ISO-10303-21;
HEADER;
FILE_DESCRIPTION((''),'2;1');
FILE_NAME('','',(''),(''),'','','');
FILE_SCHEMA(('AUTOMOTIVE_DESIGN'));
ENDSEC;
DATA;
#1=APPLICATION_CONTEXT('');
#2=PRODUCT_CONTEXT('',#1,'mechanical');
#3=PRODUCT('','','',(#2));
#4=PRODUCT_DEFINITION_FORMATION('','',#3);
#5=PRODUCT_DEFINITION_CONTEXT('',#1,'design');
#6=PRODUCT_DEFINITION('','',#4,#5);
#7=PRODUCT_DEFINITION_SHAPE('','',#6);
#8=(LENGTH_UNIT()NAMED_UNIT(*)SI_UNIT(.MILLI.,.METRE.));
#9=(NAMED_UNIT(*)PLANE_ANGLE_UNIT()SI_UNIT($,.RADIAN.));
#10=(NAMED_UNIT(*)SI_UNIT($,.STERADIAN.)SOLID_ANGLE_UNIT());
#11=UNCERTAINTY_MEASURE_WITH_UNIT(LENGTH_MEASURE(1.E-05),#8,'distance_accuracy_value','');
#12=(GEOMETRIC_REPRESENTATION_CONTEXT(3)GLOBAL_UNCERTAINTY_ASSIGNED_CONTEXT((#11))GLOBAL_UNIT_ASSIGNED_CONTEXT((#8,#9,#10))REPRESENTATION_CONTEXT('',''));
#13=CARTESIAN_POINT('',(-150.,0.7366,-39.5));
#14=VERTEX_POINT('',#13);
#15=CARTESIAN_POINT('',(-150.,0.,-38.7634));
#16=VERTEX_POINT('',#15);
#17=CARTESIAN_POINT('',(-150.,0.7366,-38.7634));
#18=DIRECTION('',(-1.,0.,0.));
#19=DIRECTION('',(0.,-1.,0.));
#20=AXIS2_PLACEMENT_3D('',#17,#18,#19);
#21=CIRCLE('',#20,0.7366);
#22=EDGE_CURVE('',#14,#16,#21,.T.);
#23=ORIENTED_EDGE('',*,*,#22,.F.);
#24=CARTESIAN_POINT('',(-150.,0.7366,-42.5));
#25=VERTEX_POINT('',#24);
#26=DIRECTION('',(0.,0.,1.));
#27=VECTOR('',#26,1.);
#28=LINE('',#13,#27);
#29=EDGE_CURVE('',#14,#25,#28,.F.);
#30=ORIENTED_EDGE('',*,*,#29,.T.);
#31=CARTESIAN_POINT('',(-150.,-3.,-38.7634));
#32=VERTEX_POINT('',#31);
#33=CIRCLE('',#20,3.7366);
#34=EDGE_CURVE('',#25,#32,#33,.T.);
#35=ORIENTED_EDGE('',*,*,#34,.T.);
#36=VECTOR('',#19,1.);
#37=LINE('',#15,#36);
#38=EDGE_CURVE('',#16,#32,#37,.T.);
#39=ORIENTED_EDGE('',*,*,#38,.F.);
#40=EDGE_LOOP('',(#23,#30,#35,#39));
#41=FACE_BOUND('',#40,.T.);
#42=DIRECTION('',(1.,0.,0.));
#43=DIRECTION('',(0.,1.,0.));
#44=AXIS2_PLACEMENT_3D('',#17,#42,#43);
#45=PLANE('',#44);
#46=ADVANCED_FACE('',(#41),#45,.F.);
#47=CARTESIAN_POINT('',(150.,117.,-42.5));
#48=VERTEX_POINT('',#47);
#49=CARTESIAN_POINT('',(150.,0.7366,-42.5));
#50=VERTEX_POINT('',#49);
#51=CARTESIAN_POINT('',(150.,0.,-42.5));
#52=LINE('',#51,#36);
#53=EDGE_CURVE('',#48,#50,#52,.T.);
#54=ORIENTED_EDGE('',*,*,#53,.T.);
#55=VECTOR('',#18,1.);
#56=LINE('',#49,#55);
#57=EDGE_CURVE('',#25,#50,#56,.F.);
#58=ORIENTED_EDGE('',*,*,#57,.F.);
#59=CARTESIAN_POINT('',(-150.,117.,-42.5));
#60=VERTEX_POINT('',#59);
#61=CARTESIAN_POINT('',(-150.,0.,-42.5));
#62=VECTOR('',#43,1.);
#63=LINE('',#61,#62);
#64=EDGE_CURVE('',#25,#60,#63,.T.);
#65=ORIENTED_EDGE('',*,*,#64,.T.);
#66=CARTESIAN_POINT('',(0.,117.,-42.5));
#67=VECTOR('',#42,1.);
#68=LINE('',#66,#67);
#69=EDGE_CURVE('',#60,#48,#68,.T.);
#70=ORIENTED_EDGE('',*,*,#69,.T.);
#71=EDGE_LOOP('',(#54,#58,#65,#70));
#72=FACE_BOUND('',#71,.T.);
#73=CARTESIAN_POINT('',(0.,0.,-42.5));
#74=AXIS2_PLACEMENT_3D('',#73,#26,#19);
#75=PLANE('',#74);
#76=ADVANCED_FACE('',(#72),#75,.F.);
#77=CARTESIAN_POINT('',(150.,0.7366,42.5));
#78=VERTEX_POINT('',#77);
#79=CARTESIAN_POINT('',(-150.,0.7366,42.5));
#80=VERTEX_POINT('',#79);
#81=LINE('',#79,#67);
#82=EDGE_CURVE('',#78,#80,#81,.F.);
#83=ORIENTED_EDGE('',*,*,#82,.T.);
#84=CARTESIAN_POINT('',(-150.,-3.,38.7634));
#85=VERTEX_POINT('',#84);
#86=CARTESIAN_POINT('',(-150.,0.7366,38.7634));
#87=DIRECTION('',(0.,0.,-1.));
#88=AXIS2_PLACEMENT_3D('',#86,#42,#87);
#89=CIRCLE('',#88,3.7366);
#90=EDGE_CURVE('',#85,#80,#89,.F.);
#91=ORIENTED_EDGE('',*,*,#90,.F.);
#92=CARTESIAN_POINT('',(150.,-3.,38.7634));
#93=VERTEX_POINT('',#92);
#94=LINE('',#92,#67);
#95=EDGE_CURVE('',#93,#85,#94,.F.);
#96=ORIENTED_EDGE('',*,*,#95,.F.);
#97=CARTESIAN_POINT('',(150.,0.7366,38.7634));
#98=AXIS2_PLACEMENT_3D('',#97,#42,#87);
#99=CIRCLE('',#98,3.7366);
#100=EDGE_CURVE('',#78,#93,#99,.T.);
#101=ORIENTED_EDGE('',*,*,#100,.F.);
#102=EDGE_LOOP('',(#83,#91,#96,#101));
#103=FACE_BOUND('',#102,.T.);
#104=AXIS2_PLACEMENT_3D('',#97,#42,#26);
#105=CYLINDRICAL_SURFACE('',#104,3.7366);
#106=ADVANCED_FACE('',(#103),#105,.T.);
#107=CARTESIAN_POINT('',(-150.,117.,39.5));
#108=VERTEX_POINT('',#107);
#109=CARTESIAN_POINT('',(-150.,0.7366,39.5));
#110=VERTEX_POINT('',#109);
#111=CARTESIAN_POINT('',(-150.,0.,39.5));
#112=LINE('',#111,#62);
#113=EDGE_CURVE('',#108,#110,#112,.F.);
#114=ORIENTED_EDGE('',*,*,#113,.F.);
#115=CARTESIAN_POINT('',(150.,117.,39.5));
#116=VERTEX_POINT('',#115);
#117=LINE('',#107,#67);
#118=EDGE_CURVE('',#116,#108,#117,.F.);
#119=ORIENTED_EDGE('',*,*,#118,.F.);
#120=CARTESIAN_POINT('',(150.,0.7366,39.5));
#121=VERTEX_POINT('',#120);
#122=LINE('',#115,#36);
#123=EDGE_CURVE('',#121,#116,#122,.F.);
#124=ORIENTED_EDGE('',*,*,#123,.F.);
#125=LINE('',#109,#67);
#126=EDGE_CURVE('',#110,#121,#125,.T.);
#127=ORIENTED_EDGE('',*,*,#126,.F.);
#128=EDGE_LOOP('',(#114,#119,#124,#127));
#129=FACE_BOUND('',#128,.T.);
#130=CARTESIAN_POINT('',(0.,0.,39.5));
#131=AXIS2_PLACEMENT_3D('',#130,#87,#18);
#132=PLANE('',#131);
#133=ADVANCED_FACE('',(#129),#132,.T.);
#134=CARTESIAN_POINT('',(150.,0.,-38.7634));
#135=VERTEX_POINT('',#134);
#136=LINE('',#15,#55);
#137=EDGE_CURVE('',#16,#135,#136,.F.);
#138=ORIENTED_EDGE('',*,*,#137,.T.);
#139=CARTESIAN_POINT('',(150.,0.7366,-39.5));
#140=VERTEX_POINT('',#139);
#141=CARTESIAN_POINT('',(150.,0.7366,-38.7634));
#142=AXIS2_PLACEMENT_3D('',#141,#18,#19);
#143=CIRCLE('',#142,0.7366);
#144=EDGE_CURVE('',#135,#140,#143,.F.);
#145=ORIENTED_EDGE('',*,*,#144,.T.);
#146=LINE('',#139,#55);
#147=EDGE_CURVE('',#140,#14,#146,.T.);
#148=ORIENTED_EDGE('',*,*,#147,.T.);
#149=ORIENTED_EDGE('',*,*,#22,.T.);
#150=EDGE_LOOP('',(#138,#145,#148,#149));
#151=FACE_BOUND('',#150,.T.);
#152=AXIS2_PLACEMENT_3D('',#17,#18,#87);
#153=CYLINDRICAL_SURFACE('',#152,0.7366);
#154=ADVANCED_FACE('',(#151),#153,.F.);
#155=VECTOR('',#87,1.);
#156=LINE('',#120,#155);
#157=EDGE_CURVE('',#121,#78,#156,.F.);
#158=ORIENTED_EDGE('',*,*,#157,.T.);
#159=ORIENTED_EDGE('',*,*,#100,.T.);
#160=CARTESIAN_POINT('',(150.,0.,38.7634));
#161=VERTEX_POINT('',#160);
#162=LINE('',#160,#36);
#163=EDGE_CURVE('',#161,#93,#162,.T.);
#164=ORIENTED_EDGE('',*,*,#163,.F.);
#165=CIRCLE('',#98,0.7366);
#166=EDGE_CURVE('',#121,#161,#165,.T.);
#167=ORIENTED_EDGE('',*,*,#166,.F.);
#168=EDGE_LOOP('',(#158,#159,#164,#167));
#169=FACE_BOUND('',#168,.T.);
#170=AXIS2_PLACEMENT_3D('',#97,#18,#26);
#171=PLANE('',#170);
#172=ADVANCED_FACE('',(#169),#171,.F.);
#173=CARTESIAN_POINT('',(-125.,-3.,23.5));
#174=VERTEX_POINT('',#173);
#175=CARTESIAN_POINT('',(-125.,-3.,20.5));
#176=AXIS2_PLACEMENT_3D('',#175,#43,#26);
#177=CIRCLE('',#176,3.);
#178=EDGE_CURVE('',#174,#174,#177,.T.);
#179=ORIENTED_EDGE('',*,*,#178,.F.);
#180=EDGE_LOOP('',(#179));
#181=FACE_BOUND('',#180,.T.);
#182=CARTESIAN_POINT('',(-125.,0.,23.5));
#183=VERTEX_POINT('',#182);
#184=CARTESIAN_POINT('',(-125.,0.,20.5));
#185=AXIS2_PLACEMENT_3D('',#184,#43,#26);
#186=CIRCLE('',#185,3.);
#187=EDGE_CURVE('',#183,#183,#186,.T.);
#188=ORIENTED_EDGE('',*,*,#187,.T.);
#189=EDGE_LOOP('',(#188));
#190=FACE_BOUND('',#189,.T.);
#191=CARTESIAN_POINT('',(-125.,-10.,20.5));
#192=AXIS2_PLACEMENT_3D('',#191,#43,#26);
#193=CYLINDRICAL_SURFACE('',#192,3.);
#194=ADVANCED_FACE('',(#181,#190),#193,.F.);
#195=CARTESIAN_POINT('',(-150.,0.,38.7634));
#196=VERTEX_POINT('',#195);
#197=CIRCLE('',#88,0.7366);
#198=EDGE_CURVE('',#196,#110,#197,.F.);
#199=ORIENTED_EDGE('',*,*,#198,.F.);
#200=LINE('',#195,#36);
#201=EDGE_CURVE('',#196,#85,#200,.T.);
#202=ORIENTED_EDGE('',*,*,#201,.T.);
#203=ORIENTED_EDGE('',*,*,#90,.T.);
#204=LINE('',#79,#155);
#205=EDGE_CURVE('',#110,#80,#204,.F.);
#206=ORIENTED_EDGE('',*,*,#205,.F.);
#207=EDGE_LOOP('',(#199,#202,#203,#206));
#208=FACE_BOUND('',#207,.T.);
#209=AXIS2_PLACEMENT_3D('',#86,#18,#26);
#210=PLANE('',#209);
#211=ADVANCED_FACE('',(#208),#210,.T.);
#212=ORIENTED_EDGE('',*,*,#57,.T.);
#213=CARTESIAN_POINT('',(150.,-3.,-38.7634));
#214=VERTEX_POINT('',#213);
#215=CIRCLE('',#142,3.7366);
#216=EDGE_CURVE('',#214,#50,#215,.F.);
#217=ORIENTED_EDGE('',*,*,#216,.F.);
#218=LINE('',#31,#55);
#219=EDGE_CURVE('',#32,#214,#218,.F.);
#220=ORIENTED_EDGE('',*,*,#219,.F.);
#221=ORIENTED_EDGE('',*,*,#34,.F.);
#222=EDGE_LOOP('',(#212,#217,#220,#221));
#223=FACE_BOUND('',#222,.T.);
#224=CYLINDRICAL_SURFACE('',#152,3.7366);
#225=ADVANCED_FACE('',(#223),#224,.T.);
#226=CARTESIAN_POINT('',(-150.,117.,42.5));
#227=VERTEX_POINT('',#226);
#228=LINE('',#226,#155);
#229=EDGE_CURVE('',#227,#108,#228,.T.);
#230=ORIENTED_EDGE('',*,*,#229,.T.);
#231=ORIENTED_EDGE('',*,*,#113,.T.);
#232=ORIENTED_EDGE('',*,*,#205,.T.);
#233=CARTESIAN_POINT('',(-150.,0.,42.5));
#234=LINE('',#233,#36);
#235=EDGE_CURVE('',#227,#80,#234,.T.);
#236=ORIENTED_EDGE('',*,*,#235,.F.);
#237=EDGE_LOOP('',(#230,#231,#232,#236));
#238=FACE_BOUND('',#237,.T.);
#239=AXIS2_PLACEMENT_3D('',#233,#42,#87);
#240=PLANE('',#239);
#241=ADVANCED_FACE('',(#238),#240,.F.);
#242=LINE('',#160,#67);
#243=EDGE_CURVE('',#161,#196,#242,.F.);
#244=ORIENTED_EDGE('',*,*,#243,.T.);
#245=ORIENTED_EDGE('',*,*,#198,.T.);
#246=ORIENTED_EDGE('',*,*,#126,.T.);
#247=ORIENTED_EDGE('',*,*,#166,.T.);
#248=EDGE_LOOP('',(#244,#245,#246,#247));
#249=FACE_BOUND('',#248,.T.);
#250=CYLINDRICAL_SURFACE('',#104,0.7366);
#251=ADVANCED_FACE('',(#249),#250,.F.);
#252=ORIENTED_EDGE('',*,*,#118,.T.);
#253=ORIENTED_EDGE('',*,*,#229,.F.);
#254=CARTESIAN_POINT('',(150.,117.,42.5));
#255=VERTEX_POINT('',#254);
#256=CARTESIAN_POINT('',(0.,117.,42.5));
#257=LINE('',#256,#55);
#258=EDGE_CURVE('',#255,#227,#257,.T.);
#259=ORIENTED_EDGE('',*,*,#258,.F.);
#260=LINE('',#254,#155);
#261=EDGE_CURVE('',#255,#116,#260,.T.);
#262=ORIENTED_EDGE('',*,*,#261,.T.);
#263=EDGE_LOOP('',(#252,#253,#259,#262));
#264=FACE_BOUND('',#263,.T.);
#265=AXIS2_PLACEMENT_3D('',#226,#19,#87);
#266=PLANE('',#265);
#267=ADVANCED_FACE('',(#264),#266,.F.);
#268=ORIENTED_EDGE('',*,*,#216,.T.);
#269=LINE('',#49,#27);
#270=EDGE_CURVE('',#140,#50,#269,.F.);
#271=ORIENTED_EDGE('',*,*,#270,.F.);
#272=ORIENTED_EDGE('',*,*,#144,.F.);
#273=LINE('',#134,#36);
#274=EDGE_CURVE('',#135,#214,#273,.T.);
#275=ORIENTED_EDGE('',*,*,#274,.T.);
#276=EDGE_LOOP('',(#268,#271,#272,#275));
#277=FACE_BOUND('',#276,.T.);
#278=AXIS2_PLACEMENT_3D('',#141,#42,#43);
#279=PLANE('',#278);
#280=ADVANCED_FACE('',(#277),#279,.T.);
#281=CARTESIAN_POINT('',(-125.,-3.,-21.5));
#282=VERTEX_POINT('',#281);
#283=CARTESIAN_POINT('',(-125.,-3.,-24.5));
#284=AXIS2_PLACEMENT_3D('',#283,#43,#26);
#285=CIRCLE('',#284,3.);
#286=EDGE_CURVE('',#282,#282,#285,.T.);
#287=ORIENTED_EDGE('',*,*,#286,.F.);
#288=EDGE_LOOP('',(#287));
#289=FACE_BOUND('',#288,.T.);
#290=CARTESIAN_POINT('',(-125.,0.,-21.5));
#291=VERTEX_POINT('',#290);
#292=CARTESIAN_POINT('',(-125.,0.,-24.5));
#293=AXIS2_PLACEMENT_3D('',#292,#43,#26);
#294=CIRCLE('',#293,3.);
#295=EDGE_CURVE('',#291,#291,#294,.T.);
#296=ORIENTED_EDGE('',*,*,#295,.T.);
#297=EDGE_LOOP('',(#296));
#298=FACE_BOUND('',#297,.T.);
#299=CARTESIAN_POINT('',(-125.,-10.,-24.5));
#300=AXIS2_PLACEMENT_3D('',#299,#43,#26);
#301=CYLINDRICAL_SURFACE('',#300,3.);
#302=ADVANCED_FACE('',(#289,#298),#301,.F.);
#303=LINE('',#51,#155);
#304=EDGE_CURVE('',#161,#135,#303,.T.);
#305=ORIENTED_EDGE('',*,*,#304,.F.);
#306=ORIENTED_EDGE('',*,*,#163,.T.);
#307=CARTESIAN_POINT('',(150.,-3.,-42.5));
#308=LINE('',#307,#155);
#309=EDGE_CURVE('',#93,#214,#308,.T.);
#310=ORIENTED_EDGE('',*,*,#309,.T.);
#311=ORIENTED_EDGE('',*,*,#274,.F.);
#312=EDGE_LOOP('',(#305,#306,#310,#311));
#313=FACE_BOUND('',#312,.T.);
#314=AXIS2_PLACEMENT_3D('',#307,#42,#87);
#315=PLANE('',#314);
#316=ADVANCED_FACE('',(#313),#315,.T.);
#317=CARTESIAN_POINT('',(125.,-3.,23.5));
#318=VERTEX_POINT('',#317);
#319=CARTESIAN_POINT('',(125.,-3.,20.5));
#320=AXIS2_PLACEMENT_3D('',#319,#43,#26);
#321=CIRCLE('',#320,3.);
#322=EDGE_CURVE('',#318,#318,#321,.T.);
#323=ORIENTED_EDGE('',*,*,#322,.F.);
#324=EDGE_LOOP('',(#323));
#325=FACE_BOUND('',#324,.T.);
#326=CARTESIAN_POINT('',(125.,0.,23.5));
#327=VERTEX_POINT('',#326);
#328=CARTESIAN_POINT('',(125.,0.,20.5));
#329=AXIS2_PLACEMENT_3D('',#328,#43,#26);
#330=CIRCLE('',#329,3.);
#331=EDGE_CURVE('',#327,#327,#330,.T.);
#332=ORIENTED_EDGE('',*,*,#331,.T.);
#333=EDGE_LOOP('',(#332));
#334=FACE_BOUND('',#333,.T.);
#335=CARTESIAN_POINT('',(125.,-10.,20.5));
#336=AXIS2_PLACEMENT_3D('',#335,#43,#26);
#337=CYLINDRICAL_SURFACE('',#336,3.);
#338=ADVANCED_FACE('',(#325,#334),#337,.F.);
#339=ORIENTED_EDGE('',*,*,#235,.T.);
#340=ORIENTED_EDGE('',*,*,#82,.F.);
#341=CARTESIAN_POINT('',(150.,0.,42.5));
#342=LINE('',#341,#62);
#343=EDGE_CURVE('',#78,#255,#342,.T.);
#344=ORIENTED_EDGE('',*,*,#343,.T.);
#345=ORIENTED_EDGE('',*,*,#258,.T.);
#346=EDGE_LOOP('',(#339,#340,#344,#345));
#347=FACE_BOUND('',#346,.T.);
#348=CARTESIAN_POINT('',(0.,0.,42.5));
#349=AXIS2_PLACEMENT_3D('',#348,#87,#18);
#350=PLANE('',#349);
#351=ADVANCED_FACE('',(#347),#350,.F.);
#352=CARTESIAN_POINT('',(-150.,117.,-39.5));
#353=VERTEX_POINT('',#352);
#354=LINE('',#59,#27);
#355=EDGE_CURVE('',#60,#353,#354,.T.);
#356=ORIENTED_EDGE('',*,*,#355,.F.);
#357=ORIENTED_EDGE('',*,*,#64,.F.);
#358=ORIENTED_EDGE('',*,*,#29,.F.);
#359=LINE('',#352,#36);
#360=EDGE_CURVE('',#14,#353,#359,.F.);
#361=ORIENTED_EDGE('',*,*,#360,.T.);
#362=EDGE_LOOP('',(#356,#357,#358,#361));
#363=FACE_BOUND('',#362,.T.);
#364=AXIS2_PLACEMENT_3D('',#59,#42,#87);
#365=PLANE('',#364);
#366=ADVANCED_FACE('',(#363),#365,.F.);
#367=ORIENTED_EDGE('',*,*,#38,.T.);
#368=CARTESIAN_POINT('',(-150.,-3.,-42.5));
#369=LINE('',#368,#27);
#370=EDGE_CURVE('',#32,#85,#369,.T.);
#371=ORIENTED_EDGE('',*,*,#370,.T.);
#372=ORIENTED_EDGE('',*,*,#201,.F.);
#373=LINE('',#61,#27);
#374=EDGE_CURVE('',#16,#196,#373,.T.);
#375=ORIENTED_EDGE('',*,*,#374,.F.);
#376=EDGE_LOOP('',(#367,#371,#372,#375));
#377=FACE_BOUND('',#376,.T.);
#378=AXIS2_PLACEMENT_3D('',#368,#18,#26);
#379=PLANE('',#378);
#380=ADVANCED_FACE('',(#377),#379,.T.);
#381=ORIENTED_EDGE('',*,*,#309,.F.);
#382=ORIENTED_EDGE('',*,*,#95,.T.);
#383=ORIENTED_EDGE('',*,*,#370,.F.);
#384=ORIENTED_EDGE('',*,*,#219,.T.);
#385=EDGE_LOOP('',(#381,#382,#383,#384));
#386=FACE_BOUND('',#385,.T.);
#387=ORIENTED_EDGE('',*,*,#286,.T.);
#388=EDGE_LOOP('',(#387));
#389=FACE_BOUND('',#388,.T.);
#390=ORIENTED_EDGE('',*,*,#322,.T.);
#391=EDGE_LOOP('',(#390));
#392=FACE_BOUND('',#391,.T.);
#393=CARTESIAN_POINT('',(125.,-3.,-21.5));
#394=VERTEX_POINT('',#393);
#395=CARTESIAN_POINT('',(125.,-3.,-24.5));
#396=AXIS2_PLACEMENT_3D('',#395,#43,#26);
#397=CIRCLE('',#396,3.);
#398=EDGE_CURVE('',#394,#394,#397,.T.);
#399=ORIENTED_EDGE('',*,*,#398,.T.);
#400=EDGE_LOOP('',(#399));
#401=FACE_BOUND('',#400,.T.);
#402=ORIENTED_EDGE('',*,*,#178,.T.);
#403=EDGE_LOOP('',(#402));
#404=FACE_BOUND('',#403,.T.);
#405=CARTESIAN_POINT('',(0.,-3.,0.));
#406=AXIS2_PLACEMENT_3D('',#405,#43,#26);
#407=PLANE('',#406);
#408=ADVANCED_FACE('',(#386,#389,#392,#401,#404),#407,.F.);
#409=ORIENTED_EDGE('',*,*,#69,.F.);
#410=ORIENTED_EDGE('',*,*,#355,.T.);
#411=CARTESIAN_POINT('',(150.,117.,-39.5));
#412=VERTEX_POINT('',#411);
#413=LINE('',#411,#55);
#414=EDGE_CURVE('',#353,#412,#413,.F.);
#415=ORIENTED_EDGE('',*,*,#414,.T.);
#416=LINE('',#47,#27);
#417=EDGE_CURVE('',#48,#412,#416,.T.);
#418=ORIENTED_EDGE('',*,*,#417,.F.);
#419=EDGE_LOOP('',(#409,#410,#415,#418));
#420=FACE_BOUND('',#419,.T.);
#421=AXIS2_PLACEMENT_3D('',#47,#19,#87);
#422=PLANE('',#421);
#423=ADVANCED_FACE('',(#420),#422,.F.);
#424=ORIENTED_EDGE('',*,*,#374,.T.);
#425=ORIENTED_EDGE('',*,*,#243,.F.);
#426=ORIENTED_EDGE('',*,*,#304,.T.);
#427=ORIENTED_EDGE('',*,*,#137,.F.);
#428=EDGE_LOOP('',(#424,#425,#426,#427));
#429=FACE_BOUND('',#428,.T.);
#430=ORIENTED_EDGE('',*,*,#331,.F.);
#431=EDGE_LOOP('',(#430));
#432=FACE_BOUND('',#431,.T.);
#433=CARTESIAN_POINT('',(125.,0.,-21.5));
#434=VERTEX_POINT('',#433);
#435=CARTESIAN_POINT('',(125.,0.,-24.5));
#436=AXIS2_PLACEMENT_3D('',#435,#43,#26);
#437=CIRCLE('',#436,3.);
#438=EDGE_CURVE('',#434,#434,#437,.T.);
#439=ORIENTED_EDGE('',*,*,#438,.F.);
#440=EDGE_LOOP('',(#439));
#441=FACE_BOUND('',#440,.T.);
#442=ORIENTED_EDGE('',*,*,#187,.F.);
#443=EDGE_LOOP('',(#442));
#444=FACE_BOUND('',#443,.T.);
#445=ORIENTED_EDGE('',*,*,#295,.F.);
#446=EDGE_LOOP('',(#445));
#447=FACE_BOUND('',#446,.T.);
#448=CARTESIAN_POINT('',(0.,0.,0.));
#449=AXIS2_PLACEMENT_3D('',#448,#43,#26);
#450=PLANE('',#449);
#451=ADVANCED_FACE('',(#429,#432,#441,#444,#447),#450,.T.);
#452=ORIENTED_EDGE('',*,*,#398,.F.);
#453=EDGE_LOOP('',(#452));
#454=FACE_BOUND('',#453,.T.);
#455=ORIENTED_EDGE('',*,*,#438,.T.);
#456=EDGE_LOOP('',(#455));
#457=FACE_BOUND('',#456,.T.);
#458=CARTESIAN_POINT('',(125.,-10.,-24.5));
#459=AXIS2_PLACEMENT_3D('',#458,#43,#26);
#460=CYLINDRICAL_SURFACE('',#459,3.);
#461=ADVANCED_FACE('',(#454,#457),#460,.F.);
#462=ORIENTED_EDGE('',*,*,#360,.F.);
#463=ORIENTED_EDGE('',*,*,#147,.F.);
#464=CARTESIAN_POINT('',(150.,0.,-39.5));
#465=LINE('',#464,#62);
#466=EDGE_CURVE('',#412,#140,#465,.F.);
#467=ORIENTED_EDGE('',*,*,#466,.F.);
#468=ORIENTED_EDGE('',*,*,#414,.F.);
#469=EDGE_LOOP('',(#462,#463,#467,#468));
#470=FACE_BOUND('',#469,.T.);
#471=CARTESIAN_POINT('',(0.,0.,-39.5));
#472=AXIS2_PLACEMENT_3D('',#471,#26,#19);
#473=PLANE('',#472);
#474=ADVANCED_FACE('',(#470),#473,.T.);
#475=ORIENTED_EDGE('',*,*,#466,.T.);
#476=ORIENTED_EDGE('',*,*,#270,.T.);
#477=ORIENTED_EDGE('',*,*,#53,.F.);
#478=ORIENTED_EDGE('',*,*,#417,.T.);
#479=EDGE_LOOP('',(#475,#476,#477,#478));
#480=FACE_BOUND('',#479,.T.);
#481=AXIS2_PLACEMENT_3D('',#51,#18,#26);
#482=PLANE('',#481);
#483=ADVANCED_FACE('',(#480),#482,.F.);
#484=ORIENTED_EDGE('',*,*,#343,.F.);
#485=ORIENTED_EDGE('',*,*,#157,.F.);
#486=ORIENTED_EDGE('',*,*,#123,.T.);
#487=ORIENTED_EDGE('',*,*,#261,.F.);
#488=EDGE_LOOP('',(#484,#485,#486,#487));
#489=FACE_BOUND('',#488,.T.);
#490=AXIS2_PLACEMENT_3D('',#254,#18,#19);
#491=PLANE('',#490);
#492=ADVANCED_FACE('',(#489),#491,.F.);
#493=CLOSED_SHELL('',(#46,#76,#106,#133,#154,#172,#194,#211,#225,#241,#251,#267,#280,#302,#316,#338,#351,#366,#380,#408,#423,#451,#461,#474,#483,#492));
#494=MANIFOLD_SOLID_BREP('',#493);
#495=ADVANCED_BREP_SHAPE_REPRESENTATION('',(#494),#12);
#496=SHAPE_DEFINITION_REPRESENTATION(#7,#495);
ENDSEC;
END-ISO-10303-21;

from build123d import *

# Parameters (mm, degrees)
SKETCH1_W                      = 300
SKETCH1_H                      = 85
BASE_FLANGE2_DEPTH             = 3
EDGE_FLANGE1_STRIP_W           = 13.4732
EDGE_FLANGE1_STRIP_H           = 3
EDGE_FLANGE1_STRIP_CUT_DEPTH   = 300
EDGE_FLANGE1_STRIP_2_W         = 13.4732
EDGE_FLANGE1_STRIP_2_H         = 3
EDGE_FLANGE1_STRIP_CUT_2_DEPTH = 300
EDGE_FLANGE1_DEPTH             = 300
EDGE_FLANGE1_BEND_DEPTH        = 300
SKETCH17_R                     = 3
CUT_EXTRUDE1_DEPTH             = 10


# Sheet-metal steps are written as plain solids
with BuildPart() as part:
    # Sketch1 → Base-Flange2 (new body)
    with BuildSketch(Plane(origin=(0, 0, 0), x_dir=(1, 0, 0), z_dir=(0, 1, 0))):
        Rectangle(SKETCH1_W, SKETCH1_H)
    extrude(amount=-BASE_FLANGE2_DEPTH)

    # Edge-Flange1 strip (across the edge) → Edge-Flange1 strip cut (cut)
    with BuildSketch(Plane(origin=(-150, 0, 42.5), x_dir=(0, 0, -1), z_dir=(1, 0, 0))):
        with Locations((-3, -1.5)):
            Rectangle(EDGE_FLANGE1_STRIP_W, EDGE_FLANGE1_STRIP_H)
    extrude(amount=EDGE_FLANGE1_STRIP_CUT_DEPTH, mode=Mode.SUBTRACT)

    # Edge-Flange1 strip 2 (across the edge) → Edge-Flange1 strip cut 2 (cut)
    with BuildSketch(Plane(origin=(150, 0, -42.5), x_dir=(0, 0, 1), z_dir=(-1, 0, 0))):
        with Locations((-3, -1.5)):
            Rectangle(EDGE_FLANGE1_STRIP_2_W, EDGE_FLANGE1_STRIP_2_H)
    extrude(amount=EDGE_FLANGE1_STRIP_CUT_2_DEPTH, mode=Mode.SUBTRACT)

    # Edge-Flange1 section (across the edge) → Edge-Flange1 (add)
    with BuildSketch(Plane(origin=(-150, 0, 42.5), x_dir=(0, 0, -1), z_dir=(1, 0, 0))):
        with BuildLine():
            Line((0, 0.7366), (0, 117))
            Line((0, 117), (3, 117))
            Line((3, 117), (3, 0.7366))
            ThreePointArc((3, 0.7366), (3.215745145, 0.215745145), (3.7366, 0))
            Line((3.7366, 0), (3.7366, -3))
            ThreePointArc((3.7366, -3), (1.094424801, -1.905575199), (0, 0.7366))
        make_face()
    extrude(amount=EDGE_FLANGE1_DEPTH)

    # Edge-Flange1 section 2 (across the edge) → Edge-Flange1 bend (add)
    with BuildSketch(Plane(origin=(150, 0, -42.5), x_dir=(0, 0, 1), z_dir=(-1, 0, 0))):
        with BuildLine():
            Line((0, 0.7366), (0, 117))
            Line((0, 117), (3, 117))
            Line((3, 117), (3, 0.7366))
            ThreePointArc((3, 0.7366), (3.215745145, 0.215745145), (3.7366, 0))
            Line((3.7366, 0), (3.7366, -3))
            ThreePointArc((3.7366, -3), (1.094424801, -1.905575199), (0, 0.7366))
        make_face()
    extrude(amount=EDGE_FLANGE1_BEND_DEPTH)

    # Sketch17 → Cut-Extrude1 (cut)
    with BuildSketch(Plane(origin=(0, 0, 0), x_dir=(1, 0, 0), z_dir=(0, 1, 0))):
        with Locations(Location((-125, 24.5, 0), (0, 0, 270))):
            Circle(SKETCH17_R)
        with Locations(Location((-125, -20.5, 0), (0, 0, 270))):
            Circle(SKETCH17_R)
        with Locations(Location((125, 24.5, 0), (0, 0, 270))):
            Circle(SKETCH17_R)
        with Locations(Location((125, -20.5, 0), (0, 0, 270))):
            Circle(SKETCH17_R)
    extrude(amount=-CUT_EXTRUDE1_DEPTH, mode=Mode.SUBTRACT)


solid = part.part
